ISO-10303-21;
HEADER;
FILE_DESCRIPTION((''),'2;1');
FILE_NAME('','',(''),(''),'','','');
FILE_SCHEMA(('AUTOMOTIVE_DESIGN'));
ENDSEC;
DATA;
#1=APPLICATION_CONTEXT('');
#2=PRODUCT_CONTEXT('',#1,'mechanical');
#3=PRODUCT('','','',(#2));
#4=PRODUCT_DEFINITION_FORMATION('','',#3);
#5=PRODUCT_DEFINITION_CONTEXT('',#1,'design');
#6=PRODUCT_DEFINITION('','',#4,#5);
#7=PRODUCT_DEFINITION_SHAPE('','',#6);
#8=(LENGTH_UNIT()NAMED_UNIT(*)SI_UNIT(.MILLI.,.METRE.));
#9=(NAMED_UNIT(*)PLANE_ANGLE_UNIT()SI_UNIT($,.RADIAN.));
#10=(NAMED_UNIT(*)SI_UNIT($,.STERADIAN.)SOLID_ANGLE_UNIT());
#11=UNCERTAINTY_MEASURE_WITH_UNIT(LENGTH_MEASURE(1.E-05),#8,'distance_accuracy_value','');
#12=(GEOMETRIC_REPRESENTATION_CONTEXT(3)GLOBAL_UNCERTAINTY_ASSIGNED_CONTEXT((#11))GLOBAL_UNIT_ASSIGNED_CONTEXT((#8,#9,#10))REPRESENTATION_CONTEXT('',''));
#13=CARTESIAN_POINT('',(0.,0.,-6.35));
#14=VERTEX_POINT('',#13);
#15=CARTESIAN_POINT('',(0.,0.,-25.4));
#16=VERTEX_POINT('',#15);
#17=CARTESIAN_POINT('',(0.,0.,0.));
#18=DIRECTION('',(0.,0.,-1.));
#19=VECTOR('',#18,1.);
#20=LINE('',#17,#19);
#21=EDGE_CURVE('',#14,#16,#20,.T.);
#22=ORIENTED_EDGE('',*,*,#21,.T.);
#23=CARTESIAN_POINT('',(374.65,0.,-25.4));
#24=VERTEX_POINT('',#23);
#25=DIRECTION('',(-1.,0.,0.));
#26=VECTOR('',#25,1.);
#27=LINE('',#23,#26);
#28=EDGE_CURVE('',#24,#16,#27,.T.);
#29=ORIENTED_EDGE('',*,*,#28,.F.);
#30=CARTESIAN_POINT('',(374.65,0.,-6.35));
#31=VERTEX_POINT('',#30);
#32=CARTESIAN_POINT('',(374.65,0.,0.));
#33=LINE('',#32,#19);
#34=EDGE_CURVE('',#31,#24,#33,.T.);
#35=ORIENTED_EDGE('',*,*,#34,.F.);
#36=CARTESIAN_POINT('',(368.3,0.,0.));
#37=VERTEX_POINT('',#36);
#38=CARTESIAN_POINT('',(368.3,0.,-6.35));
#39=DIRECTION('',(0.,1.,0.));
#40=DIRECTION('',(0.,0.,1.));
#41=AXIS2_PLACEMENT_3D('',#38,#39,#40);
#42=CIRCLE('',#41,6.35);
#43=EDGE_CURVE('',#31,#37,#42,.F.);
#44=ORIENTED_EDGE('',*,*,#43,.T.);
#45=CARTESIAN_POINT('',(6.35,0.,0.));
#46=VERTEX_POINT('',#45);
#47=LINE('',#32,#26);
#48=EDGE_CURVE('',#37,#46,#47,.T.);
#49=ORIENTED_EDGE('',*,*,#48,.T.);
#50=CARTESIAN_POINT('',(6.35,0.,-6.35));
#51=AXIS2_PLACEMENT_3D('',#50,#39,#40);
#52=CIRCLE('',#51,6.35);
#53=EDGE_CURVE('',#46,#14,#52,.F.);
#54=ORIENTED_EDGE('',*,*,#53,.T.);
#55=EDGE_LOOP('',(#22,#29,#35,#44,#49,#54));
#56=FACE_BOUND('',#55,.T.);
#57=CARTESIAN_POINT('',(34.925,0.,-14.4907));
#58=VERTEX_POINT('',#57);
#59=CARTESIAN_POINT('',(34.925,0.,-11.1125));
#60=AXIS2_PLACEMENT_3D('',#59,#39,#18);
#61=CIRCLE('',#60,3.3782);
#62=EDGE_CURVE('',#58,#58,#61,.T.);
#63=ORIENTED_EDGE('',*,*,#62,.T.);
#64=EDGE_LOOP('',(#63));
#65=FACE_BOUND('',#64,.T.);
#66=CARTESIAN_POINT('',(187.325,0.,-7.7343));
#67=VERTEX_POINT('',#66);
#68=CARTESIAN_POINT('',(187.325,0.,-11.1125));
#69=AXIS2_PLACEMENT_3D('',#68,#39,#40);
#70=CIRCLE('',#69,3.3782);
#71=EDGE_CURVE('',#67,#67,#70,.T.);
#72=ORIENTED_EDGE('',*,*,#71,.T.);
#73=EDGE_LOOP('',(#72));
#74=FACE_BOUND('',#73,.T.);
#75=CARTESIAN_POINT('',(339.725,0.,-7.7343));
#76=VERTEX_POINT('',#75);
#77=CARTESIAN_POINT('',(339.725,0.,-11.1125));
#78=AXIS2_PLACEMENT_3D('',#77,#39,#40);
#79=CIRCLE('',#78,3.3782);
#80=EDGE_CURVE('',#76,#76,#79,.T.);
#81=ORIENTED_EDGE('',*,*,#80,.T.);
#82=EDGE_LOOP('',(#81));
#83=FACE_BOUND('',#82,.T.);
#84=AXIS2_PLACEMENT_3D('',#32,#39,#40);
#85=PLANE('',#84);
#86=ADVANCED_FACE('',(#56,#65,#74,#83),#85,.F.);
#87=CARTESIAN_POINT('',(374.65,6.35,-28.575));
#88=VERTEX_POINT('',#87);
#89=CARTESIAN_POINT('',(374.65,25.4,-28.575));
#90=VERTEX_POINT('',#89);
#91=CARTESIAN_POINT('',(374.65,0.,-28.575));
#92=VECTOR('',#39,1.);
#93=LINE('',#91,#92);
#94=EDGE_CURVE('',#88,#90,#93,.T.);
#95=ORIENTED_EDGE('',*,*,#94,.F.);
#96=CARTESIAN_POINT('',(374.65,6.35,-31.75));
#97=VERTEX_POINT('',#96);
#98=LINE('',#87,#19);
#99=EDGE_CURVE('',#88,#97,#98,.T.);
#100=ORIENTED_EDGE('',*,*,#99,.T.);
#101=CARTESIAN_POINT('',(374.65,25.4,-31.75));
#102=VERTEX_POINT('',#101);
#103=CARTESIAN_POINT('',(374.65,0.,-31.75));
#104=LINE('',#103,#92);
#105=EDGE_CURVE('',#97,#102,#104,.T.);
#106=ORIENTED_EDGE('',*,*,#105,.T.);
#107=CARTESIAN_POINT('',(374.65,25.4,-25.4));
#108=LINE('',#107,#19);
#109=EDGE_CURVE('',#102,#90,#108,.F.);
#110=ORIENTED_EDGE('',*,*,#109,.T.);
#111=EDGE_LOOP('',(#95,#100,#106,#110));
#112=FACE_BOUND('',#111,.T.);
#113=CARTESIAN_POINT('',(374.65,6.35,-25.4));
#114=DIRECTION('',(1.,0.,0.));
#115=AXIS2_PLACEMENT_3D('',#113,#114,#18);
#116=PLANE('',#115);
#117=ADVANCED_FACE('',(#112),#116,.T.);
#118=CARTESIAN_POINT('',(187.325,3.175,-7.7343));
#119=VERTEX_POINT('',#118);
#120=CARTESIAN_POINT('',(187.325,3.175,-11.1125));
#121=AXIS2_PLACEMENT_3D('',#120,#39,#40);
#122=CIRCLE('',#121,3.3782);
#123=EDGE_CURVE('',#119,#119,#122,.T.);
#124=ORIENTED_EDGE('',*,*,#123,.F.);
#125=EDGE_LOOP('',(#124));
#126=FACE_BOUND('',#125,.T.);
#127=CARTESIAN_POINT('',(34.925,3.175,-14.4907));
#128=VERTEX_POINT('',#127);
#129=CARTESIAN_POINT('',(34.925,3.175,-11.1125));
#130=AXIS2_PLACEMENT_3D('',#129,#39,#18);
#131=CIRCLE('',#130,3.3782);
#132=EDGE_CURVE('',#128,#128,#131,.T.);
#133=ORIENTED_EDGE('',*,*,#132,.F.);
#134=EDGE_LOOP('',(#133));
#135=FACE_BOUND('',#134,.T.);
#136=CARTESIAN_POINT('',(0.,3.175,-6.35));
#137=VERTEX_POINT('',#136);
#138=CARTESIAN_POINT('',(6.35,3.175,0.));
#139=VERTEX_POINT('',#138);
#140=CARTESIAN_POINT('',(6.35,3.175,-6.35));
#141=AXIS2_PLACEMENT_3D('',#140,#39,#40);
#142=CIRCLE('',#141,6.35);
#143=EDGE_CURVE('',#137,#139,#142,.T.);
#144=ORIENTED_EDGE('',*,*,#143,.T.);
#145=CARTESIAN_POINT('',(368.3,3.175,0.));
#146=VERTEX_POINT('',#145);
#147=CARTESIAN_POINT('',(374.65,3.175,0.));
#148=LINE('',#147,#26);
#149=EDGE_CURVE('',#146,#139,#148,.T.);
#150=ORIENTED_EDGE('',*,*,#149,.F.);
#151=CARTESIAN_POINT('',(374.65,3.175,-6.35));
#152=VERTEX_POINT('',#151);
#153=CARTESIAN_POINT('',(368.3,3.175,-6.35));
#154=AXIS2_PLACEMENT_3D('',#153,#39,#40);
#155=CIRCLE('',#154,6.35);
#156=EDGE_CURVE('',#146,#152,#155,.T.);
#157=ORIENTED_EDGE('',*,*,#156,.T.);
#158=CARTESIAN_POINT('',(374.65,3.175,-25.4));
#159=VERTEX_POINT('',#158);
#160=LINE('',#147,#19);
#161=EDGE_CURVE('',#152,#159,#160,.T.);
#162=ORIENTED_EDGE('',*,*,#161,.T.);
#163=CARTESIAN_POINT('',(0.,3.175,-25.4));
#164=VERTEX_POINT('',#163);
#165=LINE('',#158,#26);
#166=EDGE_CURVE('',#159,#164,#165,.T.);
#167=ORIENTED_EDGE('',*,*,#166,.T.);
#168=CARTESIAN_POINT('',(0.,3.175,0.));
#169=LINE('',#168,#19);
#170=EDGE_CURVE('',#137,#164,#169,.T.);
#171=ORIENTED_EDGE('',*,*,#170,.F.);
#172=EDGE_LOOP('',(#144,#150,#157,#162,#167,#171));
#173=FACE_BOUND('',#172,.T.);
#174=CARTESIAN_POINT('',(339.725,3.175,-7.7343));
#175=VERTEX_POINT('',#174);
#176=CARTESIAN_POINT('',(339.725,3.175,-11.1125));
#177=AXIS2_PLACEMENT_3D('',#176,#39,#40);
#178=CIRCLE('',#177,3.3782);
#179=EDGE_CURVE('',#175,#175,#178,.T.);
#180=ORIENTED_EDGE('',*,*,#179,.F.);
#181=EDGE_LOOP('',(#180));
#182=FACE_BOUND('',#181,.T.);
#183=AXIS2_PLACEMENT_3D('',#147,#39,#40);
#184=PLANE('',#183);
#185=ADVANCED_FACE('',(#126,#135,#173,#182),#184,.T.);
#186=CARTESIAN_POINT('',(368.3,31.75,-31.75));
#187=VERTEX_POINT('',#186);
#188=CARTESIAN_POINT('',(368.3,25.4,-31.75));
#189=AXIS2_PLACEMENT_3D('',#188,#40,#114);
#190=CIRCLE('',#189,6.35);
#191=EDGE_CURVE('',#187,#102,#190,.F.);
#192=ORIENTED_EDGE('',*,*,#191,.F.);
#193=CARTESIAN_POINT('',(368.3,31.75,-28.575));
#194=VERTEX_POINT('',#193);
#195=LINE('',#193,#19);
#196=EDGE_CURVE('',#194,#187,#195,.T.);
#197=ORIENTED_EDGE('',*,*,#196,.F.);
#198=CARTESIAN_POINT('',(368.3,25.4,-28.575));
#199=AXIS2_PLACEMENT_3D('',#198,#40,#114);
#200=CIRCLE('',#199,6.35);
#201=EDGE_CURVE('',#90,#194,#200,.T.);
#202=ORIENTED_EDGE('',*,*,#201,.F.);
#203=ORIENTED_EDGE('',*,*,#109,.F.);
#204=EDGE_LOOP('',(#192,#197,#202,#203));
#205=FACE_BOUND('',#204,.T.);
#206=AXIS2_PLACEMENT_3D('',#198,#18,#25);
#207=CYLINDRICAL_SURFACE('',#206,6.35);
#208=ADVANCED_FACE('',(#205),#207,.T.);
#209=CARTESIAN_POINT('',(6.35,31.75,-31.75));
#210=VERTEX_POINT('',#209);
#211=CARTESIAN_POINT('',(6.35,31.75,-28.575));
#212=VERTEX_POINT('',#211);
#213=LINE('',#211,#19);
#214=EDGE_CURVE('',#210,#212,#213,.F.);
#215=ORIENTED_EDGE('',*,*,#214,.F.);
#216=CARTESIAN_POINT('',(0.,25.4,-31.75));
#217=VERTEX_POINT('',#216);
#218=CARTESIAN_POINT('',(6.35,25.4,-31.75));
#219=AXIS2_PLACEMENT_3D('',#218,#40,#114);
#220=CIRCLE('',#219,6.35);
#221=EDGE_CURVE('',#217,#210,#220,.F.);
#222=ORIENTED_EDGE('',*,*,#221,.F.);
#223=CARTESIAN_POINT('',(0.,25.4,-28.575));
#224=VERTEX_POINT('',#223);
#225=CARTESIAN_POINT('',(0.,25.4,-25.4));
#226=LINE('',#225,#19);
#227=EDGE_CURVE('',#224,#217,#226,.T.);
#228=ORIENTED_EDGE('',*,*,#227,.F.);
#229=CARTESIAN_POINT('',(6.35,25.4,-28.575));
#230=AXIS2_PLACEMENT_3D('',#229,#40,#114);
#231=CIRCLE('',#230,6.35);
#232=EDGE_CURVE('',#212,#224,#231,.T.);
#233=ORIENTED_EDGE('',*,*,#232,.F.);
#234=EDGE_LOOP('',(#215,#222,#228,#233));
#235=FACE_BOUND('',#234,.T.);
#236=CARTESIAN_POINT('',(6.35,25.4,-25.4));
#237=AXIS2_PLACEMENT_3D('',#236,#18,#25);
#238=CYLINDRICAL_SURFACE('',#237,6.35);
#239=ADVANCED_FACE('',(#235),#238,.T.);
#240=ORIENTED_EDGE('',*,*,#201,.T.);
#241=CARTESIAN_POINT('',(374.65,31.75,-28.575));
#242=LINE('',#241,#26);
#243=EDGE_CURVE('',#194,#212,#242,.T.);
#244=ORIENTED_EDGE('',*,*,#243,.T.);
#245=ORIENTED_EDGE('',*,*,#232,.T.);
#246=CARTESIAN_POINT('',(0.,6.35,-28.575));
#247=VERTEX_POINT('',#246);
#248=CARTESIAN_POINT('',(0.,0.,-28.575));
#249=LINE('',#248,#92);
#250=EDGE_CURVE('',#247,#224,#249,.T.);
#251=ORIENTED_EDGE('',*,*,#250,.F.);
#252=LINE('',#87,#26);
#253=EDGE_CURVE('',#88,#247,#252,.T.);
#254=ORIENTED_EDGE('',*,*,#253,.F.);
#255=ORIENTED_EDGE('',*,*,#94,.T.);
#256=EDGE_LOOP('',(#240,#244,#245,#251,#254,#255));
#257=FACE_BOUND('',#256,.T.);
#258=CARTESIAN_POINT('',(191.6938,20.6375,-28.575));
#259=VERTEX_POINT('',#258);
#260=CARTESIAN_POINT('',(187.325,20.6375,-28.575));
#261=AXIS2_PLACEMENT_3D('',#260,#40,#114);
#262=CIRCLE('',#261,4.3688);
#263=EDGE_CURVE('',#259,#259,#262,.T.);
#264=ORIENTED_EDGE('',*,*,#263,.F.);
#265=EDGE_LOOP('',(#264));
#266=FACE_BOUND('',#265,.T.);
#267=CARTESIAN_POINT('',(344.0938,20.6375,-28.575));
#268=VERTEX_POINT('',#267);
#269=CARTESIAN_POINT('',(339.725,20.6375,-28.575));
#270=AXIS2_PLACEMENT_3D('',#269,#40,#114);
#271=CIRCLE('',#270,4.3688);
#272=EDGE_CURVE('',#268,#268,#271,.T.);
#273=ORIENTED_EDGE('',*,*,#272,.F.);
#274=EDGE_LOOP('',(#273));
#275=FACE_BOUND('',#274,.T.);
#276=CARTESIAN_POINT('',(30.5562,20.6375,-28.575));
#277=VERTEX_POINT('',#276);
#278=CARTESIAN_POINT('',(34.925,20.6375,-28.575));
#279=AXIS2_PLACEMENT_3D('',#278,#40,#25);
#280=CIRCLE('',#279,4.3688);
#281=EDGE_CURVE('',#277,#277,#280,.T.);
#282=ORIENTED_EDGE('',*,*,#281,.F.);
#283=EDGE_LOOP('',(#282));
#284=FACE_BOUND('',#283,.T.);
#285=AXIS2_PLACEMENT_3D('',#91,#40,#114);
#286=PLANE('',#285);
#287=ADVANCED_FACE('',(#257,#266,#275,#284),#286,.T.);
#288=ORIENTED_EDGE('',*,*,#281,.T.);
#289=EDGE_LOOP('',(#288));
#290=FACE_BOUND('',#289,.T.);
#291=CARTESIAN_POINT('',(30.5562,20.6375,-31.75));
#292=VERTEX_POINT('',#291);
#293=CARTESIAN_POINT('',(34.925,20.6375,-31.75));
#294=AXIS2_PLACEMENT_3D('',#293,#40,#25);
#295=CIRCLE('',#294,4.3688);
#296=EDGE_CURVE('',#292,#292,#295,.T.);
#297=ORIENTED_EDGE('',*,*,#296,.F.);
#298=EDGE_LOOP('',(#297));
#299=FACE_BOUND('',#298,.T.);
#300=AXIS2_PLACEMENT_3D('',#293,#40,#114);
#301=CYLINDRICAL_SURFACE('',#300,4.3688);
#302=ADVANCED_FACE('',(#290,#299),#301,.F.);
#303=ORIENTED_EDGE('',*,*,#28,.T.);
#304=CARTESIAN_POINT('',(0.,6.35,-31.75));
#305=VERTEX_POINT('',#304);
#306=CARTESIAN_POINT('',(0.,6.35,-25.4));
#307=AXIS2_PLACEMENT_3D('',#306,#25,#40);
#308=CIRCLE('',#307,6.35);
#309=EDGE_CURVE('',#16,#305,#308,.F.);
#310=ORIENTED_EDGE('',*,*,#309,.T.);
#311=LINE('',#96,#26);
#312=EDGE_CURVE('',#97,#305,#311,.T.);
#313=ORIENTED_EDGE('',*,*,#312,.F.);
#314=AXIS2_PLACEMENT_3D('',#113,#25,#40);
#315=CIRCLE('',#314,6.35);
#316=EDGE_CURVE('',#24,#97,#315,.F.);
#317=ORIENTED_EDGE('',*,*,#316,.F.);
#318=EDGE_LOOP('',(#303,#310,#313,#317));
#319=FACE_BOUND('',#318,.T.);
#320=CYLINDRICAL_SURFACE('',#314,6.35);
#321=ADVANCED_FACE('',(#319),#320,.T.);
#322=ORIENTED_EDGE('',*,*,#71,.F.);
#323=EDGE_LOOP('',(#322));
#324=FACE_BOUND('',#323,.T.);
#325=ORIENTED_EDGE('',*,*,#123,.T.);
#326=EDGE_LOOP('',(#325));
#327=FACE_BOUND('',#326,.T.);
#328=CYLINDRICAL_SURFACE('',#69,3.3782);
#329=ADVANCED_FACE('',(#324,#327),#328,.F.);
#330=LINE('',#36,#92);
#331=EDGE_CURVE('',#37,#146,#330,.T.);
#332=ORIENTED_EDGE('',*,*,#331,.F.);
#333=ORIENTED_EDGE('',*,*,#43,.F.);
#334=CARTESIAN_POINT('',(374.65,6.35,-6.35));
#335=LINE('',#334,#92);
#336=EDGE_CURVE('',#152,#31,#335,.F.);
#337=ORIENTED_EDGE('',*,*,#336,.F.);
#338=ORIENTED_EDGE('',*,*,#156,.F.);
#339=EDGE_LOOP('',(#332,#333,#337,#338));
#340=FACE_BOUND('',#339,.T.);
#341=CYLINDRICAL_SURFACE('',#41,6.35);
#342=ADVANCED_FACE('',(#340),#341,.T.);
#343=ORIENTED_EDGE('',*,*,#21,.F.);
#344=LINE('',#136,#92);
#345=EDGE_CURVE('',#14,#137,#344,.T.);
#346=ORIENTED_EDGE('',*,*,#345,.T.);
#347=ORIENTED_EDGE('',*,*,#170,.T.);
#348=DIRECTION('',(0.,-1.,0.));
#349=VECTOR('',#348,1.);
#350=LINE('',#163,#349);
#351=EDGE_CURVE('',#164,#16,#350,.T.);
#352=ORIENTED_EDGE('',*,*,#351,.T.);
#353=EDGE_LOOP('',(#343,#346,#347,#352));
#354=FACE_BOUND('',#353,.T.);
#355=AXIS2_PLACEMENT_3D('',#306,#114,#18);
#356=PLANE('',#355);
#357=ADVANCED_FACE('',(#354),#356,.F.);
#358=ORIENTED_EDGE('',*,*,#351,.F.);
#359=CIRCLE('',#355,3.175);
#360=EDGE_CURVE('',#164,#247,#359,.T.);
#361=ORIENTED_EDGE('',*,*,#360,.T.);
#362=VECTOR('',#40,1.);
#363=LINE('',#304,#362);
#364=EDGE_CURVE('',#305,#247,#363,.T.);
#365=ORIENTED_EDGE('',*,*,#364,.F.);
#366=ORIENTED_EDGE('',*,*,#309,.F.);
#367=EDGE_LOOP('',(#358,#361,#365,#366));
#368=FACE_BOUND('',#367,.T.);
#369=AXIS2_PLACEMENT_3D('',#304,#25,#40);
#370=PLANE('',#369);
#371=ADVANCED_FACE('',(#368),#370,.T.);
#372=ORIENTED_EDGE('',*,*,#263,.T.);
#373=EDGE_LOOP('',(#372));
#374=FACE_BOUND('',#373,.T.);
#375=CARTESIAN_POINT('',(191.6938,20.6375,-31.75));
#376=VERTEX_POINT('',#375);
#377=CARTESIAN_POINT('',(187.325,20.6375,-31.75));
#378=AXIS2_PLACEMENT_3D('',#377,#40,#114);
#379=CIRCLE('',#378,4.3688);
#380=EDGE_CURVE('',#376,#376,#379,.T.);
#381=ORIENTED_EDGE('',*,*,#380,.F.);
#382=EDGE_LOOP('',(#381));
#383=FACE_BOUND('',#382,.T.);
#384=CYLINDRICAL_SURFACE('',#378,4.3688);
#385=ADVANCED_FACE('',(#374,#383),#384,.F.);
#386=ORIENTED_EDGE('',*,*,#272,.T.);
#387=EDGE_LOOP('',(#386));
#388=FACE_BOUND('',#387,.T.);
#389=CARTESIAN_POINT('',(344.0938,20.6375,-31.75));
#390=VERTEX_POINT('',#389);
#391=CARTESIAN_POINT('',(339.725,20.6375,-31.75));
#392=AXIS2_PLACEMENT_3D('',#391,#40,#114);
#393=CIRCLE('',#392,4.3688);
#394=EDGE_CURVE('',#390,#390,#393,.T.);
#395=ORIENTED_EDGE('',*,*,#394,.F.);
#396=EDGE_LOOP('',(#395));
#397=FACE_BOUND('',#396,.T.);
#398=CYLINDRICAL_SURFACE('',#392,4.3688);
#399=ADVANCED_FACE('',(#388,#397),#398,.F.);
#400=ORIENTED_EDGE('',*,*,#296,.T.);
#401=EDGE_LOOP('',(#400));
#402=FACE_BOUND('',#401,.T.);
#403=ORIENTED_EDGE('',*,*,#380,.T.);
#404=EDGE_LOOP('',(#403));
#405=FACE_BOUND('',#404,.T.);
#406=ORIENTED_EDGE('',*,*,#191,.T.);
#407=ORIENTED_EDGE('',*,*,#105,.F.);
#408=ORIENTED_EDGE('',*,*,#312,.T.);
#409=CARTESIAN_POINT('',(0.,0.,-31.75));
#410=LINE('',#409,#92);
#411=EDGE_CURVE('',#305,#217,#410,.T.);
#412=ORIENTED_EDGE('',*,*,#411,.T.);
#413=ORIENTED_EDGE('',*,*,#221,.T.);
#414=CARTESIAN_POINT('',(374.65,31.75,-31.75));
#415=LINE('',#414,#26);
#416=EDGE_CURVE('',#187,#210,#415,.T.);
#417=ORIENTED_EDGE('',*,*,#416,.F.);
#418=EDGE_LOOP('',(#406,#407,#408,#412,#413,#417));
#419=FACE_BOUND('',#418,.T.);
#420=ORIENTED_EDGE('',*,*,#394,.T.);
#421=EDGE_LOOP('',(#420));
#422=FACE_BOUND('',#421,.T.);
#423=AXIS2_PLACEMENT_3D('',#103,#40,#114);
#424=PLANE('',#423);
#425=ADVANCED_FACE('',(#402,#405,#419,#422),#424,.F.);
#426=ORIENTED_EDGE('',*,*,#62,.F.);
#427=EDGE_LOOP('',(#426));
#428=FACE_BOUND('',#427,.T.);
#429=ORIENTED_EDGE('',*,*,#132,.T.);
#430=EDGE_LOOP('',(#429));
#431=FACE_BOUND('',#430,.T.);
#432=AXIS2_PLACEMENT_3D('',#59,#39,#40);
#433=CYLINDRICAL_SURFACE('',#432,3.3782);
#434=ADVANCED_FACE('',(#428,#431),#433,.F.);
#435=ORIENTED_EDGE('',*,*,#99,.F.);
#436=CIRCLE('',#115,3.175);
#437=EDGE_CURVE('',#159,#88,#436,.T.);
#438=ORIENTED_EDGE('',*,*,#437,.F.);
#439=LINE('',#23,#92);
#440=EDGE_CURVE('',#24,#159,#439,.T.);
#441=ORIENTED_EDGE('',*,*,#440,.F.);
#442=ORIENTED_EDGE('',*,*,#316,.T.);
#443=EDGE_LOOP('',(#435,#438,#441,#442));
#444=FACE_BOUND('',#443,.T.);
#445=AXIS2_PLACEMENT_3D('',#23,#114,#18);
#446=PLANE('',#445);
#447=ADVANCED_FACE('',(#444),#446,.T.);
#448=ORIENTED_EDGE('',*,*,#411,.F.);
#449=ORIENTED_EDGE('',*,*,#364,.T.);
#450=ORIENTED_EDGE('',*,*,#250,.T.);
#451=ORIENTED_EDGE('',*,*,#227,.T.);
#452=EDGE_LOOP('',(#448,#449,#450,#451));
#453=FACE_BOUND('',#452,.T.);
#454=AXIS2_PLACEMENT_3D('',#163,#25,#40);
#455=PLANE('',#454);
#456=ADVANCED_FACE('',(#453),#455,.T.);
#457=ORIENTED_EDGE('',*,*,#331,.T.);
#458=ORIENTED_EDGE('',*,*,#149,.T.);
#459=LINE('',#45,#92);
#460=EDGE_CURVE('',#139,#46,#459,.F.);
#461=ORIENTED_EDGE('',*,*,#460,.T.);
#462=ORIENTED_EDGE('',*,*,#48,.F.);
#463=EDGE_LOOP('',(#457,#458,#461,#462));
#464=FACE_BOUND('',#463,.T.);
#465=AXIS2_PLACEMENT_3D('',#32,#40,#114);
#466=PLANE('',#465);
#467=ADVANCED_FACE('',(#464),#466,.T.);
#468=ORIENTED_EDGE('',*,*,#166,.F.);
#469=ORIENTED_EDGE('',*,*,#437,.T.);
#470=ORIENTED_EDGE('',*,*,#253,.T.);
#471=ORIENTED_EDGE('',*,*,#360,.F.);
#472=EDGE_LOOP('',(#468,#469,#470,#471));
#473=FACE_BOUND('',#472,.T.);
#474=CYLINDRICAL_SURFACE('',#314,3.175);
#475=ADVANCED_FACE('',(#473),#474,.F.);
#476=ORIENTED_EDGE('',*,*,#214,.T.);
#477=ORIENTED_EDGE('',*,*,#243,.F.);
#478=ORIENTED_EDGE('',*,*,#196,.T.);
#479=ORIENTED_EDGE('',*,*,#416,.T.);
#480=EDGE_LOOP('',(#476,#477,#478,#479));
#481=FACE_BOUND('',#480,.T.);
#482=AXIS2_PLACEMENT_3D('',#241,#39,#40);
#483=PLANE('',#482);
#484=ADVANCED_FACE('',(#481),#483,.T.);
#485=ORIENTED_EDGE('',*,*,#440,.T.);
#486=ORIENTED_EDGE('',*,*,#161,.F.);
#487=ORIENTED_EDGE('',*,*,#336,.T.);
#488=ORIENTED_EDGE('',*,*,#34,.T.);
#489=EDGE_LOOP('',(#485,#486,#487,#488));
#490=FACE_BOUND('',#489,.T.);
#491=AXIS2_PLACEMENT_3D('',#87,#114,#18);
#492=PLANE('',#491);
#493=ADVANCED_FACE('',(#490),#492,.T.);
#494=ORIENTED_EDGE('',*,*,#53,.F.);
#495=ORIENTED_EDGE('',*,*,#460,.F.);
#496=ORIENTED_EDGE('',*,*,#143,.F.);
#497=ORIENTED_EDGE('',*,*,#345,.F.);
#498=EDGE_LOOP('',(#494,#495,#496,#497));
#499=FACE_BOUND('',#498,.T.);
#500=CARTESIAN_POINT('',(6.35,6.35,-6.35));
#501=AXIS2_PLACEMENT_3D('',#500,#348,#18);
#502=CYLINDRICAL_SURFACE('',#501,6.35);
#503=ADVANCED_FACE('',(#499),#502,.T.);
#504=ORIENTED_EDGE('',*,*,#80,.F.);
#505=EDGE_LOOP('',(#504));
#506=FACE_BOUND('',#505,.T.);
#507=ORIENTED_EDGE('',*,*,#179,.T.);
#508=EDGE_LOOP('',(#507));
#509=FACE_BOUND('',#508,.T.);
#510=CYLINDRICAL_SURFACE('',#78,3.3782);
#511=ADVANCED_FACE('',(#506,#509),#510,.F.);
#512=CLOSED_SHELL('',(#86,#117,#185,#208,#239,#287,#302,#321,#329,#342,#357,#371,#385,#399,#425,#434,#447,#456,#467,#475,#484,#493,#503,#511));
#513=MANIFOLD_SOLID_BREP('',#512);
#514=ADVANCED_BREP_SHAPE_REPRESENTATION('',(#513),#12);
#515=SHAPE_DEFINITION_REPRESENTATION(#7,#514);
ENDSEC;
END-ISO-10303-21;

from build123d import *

# Parameters (mm, degrees)
BASE_FLANGE1_DEPTH = 374.65
SKETCH6_R          = 3.3782
CUT_EXTRUDE1_DEPTH = 378.077201147
SKETCH7_R          = 4.3688
CUT_EXTRUDE2_DEPTH = 378.077201147
FILLET1_R          = 6.35


# Sheet-metal steps are written as plain solids
with BuildPart() as part:
    # Sketch1 → Base-Flange1 (new body)
    with BuildSketch(Plane(origin=(0, 0, 0), x_dir=(0, 0, -1), z_dir=(1, 0, 0))):
        with BuildLine():
            Line((0, 0), (25.4, 0))
            ThreePointArc((25.4, 0), (29.890128061, 1.859871939), (31.75, 6.35))
            Line((31.75, 6.35), (31.75, 31.75))
            Line((31.75, 31.75), (28.575, 31.75))
            Line((28.575, 31.75), (28.575, 6.35))
            ThreePointArc((28.575, 6.35), (27.64506403, 4.10493597), (25.4, 3.175))
            Line((25.4, 3.175), (0, 3.175))
            Line((0, 3.175), (0, 0))
        make_face()
    extrude(amount=BASE_FLANGE1_DEPTH)

    # Sketch6 → Cut-Extrude1 (cut, through all)
    with BuildSketch(Plane(origin=(0, 3.175, 0), x_dir=(1, 0, 0), z_dir=(0, 1, 0))):
        with Locations(Location((187.325, 11.1125, 0), (0, 0, 270))):
            Circle(SKETCH6_R)
        with Locations(Location((339.725, 11.1125, 0), (0, 0, 270))):
            Circle(SKETCH6_R)
        with Locations(Location((34.925, 11.1125, 0), (0, 0, 90))):
            Circle(SKETCH6_R)
    extrude(amount=-CUT_EXTRUDE1_DEPTH, mode=Mode.SUBTRACT)

    # Sketch7 → Cut-Extrude2 (cut, through all)
    with BuildSketch(Plane.XY.offset(-28.575)):
        with Locations((187.325, 20.6375)):
            Circle(SKETCH7_R)
        with Locations((339.725, 20.6375)):
            Circle(SKETCH7_R)
        with Locations(Location((34.925, 20.6375, 0), (0, 0, 180))):
            Circle(SKETCH7_R)
    extrude(amount=-CUT_EXTRUDE2_DEPTH, mode=Mode.SUBTRACT)

    # Fillet1
    fillet1_edges = [part.edges().sort_by_distance(p)[0] for p in [
        (374.65, 1.5875, 0),
        (0, 1.5875, 0),
        (374.65, 31.75, -30.1625),
        (0, 31.75, -30.1625),
    ]]
    fillet(fillet1_edges, radius=FILLET1_R)


solid = part.part
